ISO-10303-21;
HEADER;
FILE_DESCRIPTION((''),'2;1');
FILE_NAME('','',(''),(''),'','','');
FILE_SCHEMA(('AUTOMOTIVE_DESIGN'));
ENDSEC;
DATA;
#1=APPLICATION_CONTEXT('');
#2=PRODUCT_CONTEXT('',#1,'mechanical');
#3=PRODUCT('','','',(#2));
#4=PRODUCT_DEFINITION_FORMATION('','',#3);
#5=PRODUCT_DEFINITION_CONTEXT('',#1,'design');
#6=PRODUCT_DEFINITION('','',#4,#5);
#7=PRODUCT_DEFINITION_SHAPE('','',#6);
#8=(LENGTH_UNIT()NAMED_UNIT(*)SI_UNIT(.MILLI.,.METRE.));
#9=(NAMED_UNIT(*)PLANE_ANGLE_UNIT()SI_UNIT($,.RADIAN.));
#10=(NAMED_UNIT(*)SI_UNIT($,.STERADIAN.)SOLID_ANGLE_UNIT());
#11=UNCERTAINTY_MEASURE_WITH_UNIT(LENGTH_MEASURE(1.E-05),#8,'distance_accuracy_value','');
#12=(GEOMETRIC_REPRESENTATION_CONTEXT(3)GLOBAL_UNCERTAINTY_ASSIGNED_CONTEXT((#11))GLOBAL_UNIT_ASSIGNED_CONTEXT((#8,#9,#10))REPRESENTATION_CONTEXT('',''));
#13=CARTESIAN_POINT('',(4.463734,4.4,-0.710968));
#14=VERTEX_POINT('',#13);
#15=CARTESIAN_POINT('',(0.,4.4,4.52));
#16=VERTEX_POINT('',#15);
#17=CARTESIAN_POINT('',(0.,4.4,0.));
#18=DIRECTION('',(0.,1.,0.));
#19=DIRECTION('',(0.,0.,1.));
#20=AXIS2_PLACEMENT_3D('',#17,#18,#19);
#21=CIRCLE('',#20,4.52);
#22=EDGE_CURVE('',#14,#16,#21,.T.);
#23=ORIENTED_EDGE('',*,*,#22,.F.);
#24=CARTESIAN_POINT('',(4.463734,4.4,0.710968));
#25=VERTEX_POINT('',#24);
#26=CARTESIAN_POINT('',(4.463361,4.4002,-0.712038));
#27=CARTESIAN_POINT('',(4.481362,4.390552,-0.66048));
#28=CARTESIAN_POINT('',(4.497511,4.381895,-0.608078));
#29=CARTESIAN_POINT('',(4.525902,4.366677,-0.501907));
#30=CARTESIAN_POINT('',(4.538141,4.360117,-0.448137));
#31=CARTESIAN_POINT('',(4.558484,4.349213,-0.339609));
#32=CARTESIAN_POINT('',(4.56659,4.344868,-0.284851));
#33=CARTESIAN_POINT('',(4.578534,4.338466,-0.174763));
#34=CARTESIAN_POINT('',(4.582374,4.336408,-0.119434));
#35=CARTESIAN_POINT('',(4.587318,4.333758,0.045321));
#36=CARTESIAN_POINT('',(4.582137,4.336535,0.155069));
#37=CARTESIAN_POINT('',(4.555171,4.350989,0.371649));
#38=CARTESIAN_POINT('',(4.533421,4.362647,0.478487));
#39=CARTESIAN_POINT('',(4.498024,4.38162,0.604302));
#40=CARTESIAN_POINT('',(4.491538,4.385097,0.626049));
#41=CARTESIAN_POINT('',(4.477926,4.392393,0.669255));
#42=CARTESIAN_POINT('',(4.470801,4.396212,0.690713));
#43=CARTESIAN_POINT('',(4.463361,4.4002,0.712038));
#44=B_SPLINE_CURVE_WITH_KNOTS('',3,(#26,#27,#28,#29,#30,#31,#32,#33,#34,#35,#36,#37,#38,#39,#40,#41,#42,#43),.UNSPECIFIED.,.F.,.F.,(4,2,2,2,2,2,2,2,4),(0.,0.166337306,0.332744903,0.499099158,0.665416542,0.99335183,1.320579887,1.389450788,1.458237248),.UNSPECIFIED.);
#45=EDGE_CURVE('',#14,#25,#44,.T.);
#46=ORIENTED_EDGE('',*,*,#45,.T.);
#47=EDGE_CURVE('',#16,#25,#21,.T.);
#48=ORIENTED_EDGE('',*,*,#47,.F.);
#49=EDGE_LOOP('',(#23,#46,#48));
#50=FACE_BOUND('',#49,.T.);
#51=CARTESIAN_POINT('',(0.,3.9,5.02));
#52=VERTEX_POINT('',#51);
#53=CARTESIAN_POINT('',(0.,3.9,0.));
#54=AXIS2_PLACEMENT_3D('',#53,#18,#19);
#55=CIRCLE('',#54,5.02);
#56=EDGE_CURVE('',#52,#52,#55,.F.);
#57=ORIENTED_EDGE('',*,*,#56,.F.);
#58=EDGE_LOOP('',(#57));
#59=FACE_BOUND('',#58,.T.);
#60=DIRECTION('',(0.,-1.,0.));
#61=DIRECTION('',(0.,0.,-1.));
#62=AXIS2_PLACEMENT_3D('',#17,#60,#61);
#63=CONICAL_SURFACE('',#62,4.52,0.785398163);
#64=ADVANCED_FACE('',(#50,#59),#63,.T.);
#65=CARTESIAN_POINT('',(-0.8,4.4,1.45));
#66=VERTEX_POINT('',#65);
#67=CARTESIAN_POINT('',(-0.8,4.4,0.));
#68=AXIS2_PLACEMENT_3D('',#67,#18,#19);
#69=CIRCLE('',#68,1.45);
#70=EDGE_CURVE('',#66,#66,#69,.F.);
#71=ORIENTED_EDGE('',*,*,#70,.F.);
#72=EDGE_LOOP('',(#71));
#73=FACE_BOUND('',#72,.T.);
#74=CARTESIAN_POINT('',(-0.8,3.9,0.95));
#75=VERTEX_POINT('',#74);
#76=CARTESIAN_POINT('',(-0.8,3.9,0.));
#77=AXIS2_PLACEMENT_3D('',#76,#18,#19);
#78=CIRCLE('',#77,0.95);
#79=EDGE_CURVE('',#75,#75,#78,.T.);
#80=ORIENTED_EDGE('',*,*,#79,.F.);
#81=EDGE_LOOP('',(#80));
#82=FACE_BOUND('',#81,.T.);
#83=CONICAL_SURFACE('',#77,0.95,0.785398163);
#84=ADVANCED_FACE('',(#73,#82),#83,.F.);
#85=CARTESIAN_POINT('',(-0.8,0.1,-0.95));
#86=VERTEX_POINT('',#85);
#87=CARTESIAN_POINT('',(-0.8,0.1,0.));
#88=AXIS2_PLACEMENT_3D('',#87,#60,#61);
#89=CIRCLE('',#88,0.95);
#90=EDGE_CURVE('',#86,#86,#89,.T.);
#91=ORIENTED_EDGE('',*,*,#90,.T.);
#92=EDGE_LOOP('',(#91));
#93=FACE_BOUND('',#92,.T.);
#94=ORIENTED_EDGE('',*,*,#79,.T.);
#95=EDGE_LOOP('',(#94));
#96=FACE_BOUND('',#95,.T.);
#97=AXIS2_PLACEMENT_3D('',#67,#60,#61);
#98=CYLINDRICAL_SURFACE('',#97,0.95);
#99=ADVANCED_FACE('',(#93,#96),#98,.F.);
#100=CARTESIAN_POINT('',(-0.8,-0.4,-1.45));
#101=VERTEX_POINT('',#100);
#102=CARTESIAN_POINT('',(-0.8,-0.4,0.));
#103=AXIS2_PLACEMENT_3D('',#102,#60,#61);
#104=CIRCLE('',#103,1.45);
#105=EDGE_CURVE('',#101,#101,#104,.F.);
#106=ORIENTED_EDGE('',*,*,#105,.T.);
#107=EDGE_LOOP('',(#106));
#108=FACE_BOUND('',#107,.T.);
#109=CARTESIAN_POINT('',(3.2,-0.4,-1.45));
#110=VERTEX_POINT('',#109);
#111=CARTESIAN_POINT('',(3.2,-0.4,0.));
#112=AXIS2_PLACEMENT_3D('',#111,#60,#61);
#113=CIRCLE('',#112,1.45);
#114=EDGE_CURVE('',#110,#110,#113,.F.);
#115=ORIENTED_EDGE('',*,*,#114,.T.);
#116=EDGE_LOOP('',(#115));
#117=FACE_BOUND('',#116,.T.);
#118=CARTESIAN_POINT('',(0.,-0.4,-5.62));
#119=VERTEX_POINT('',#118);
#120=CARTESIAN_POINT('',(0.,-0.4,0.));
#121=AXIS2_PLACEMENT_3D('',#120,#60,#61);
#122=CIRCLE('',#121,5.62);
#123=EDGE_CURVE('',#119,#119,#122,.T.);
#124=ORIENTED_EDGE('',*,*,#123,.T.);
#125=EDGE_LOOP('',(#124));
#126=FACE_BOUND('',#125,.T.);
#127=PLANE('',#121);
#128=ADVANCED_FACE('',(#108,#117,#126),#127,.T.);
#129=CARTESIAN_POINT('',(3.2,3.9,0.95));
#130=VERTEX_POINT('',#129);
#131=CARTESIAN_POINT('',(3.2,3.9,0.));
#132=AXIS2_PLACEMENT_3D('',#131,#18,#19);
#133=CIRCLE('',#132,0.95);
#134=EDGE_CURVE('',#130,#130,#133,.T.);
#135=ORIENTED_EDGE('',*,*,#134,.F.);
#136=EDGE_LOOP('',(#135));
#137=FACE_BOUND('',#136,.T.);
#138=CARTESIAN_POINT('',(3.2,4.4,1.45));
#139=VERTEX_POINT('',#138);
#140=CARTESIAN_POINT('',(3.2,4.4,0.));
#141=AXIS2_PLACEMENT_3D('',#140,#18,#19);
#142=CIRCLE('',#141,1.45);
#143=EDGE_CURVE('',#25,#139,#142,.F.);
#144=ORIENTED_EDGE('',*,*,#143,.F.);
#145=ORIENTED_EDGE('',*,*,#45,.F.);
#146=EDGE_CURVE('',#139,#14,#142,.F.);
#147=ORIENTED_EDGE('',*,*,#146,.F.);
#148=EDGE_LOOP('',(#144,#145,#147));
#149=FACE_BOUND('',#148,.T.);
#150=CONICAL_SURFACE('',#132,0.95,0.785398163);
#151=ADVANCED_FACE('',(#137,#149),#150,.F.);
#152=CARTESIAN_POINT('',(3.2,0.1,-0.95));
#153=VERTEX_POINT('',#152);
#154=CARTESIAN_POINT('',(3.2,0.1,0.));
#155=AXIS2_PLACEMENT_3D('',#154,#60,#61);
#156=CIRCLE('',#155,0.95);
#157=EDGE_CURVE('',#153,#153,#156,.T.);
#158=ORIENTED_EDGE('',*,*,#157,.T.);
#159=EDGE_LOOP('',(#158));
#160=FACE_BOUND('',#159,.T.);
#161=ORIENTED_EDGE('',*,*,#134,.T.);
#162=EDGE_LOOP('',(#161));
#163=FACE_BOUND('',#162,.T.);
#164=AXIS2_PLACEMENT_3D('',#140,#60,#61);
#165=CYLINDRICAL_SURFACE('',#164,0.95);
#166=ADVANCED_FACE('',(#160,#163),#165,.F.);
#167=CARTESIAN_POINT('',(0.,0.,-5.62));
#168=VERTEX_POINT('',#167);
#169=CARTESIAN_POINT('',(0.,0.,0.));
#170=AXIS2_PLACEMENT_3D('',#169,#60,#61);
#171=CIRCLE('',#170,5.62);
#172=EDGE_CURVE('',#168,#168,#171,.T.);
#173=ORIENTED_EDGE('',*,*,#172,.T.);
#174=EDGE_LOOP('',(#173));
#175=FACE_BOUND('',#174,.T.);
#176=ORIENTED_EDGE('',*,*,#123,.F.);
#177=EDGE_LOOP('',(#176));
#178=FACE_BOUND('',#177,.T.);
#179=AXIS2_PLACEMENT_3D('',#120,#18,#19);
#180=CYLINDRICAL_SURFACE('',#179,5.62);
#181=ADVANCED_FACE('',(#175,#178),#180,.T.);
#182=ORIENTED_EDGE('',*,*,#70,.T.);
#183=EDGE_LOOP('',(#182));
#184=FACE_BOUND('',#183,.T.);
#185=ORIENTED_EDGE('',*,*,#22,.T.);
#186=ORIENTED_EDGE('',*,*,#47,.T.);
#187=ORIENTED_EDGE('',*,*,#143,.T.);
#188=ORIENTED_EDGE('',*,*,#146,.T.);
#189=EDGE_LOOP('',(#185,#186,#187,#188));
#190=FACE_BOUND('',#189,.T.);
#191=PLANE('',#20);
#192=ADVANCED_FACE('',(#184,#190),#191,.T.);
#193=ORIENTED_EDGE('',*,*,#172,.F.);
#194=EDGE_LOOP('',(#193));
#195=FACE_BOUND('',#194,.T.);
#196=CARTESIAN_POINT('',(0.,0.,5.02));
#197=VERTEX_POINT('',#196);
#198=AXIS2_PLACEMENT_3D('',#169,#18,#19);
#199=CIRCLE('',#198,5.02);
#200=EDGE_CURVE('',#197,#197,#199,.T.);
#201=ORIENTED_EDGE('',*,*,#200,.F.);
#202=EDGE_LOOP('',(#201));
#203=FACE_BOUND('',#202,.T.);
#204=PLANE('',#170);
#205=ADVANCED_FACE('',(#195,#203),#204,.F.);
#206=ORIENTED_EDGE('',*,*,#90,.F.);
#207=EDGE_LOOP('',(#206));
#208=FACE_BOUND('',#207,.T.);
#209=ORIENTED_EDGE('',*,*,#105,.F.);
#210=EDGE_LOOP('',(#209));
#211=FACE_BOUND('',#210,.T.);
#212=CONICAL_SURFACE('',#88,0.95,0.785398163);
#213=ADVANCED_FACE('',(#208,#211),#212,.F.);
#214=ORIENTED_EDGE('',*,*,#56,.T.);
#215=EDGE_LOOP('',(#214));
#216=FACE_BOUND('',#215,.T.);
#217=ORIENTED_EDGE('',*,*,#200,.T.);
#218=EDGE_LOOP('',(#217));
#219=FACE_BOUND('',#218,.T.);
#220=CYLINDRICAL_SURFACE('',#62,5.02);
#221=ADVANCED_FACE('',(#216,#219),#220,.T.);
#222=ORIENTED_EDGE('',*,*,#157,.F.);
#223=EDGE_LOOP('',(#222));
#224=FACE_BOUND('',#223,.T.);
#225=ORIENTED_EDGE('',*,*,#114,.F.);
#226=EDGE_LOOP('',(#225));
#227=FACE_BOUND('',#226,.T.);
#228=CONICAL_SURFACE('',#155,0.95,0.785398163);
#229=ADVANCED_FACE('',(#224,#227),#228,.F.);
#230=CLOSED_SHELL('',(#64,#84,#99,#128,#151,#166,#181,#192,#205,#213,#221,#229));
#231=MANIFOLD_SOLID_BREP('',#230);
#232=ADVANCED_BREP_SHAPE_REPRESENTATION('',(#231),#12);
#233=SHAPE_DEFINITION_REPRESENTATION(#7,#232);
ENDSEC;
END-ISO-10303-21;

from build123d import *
from build123d.topology import SkipClean

# Parameters (mm, degrees)
SKETCH_1_R      = 5.02
SKETCH_1_R_2    = 0.95
EXTRUDE_1_DEPTH = 4.4
EXTRUDE_START   = 0.4
SKETCH_3_R      = 5.62
SKETCH_3_R_2    = 0.95
EXTRUDE_2_DEPTH = 0.4
CHAMFER_1_SIZE  = 0.5


with BuildPart() as part:
    # 草图1 → 凸台-拉伸1 (new body)
    with BuildSketch(Plane(origin=(0, 0, 0), x_dir=(1, 0, 0), z_dir=(0, 1, 0))):
        with Locations(Location((0, 0, 0), (0, 0, 270))):
            Circle(SKETCH_1_R)
        with Locations(Location((3.2, 0, 0), (0, 0, 270))):
            Circle(SKETCH_1_R_2, mode=Mode.SUBTRACT)
        with Locations(Location((-0.8, 0, 0), (0, 0, 90))):
            Circle(SKETCH_1_R_2, mode=Mode.SUBTRACT)
    extrude(amount=EXTRUDE_1_DEPTH)

    # 草图3 → 凸台-拉伸2 (add)
    with SkipClean():  # the faces are left unmerged after this step: merging them gives an invalid solid
        with BuildSketch(Plane.XZ.offset(EXTRUDE_START)):
            with Locations(Location((0, 0, 0), (0, 0, 270))):
                Circle(SKETCH_3_R)
            with Locations(Location((3.2, 0, 0), (0, 0, 270))):
                Circle(SKETCH_3_R_2, mode=Mode.SUBTRACT)
            with Locations(Location((-0.8, 0, 0), (0, 0, 270))):
                Circle(SKETCH_3_R_2, mode=Mode.SUBTRACT)
        extrude(amount=-EXTRUDE_2_DEPTH)

    # 倒角1
    # the kernel refuses this chamfer: 0.5 mm, written as the material it takes off along each edge
    with BuildSketch(Plane(origin=(3.2, -0.4, 0), x_dir=(0, 0, -1), z_dir=(-1, 0, 0))) as chamfer_1_piece_1:
        Polygon((0.95 + CHAMFER_1_SIZE, 0), (0.95, -CHAMFER_1_SIZE), (0.95, 0), align=None)
    revolve(axis=Axis((3.2, -0.4, 0), (0, -1, 0)), mode=Mode.SUBTRACT)
    with BuildSketch(Plane(origin=(-0.8, -0.4, 0), x_dir=(0, 0, -1), z_dir=(-1, 0, 0))) as chamfer_1_piece_2:
        Polygon((0.95 + CHAMFER_1_SIZE, 0), (0.95, -CHAMFER_1_SIZE), (0.95, 0), align=None)
    revolve(axis=Axis((-0.8, -0.4, 0), (0, -1, 0)), mode=Mode.SUBTRACT)
    with BuildSketch(Plane(origin=(0, 4.4, 0), x_dir=(0, 0, 1), z_dir=(-1, 0, 0))) as chamfer_1_piece_3:
        Polygon((5.02, -CHAMFER_1_SIZE), (5.02 - CHAMFER_1_SIZE, 0), (5.02, 0), align=None)
    revolve(axis=Axis((0, 4.4, 0), (0, 1, 0)), mode=Mode.SUBTRACT)
    with BuildSketch(Plane(origin=(3.2, 4.4, 0), x_dir=(0, 0, 1), z_dir=(-1, 0, 0))) as chamfer_1_piece_4:
        Polygon((0.95 + CHAMFER_1_SIZE, 0), (0.95, -CHAMFER_1_SIZE), (0.95, 0), align=None)
    revolve(axis=Axis((3.2, 4.4, 0), (0, 1, 0)), mode=Mode.SUBTRACT)
    with BuildSketch(Plane(origin=(-0.8, 4.4, 0), x_dir=(0, 0, -1), z_dir=(1, 0, 0))) as chamfer_1_piece_5:
        Polygon((0.95 + CHAMFER_1_SIZE, 0), (0.95, -CHAMFER_1_SIZE), (0.95, 0), align=None)
    revolve(axis=Axis((-0.8, 4.4, 0), (0, 1, 0)), mode=Mode.SUBTRACT)


solid = part.part
